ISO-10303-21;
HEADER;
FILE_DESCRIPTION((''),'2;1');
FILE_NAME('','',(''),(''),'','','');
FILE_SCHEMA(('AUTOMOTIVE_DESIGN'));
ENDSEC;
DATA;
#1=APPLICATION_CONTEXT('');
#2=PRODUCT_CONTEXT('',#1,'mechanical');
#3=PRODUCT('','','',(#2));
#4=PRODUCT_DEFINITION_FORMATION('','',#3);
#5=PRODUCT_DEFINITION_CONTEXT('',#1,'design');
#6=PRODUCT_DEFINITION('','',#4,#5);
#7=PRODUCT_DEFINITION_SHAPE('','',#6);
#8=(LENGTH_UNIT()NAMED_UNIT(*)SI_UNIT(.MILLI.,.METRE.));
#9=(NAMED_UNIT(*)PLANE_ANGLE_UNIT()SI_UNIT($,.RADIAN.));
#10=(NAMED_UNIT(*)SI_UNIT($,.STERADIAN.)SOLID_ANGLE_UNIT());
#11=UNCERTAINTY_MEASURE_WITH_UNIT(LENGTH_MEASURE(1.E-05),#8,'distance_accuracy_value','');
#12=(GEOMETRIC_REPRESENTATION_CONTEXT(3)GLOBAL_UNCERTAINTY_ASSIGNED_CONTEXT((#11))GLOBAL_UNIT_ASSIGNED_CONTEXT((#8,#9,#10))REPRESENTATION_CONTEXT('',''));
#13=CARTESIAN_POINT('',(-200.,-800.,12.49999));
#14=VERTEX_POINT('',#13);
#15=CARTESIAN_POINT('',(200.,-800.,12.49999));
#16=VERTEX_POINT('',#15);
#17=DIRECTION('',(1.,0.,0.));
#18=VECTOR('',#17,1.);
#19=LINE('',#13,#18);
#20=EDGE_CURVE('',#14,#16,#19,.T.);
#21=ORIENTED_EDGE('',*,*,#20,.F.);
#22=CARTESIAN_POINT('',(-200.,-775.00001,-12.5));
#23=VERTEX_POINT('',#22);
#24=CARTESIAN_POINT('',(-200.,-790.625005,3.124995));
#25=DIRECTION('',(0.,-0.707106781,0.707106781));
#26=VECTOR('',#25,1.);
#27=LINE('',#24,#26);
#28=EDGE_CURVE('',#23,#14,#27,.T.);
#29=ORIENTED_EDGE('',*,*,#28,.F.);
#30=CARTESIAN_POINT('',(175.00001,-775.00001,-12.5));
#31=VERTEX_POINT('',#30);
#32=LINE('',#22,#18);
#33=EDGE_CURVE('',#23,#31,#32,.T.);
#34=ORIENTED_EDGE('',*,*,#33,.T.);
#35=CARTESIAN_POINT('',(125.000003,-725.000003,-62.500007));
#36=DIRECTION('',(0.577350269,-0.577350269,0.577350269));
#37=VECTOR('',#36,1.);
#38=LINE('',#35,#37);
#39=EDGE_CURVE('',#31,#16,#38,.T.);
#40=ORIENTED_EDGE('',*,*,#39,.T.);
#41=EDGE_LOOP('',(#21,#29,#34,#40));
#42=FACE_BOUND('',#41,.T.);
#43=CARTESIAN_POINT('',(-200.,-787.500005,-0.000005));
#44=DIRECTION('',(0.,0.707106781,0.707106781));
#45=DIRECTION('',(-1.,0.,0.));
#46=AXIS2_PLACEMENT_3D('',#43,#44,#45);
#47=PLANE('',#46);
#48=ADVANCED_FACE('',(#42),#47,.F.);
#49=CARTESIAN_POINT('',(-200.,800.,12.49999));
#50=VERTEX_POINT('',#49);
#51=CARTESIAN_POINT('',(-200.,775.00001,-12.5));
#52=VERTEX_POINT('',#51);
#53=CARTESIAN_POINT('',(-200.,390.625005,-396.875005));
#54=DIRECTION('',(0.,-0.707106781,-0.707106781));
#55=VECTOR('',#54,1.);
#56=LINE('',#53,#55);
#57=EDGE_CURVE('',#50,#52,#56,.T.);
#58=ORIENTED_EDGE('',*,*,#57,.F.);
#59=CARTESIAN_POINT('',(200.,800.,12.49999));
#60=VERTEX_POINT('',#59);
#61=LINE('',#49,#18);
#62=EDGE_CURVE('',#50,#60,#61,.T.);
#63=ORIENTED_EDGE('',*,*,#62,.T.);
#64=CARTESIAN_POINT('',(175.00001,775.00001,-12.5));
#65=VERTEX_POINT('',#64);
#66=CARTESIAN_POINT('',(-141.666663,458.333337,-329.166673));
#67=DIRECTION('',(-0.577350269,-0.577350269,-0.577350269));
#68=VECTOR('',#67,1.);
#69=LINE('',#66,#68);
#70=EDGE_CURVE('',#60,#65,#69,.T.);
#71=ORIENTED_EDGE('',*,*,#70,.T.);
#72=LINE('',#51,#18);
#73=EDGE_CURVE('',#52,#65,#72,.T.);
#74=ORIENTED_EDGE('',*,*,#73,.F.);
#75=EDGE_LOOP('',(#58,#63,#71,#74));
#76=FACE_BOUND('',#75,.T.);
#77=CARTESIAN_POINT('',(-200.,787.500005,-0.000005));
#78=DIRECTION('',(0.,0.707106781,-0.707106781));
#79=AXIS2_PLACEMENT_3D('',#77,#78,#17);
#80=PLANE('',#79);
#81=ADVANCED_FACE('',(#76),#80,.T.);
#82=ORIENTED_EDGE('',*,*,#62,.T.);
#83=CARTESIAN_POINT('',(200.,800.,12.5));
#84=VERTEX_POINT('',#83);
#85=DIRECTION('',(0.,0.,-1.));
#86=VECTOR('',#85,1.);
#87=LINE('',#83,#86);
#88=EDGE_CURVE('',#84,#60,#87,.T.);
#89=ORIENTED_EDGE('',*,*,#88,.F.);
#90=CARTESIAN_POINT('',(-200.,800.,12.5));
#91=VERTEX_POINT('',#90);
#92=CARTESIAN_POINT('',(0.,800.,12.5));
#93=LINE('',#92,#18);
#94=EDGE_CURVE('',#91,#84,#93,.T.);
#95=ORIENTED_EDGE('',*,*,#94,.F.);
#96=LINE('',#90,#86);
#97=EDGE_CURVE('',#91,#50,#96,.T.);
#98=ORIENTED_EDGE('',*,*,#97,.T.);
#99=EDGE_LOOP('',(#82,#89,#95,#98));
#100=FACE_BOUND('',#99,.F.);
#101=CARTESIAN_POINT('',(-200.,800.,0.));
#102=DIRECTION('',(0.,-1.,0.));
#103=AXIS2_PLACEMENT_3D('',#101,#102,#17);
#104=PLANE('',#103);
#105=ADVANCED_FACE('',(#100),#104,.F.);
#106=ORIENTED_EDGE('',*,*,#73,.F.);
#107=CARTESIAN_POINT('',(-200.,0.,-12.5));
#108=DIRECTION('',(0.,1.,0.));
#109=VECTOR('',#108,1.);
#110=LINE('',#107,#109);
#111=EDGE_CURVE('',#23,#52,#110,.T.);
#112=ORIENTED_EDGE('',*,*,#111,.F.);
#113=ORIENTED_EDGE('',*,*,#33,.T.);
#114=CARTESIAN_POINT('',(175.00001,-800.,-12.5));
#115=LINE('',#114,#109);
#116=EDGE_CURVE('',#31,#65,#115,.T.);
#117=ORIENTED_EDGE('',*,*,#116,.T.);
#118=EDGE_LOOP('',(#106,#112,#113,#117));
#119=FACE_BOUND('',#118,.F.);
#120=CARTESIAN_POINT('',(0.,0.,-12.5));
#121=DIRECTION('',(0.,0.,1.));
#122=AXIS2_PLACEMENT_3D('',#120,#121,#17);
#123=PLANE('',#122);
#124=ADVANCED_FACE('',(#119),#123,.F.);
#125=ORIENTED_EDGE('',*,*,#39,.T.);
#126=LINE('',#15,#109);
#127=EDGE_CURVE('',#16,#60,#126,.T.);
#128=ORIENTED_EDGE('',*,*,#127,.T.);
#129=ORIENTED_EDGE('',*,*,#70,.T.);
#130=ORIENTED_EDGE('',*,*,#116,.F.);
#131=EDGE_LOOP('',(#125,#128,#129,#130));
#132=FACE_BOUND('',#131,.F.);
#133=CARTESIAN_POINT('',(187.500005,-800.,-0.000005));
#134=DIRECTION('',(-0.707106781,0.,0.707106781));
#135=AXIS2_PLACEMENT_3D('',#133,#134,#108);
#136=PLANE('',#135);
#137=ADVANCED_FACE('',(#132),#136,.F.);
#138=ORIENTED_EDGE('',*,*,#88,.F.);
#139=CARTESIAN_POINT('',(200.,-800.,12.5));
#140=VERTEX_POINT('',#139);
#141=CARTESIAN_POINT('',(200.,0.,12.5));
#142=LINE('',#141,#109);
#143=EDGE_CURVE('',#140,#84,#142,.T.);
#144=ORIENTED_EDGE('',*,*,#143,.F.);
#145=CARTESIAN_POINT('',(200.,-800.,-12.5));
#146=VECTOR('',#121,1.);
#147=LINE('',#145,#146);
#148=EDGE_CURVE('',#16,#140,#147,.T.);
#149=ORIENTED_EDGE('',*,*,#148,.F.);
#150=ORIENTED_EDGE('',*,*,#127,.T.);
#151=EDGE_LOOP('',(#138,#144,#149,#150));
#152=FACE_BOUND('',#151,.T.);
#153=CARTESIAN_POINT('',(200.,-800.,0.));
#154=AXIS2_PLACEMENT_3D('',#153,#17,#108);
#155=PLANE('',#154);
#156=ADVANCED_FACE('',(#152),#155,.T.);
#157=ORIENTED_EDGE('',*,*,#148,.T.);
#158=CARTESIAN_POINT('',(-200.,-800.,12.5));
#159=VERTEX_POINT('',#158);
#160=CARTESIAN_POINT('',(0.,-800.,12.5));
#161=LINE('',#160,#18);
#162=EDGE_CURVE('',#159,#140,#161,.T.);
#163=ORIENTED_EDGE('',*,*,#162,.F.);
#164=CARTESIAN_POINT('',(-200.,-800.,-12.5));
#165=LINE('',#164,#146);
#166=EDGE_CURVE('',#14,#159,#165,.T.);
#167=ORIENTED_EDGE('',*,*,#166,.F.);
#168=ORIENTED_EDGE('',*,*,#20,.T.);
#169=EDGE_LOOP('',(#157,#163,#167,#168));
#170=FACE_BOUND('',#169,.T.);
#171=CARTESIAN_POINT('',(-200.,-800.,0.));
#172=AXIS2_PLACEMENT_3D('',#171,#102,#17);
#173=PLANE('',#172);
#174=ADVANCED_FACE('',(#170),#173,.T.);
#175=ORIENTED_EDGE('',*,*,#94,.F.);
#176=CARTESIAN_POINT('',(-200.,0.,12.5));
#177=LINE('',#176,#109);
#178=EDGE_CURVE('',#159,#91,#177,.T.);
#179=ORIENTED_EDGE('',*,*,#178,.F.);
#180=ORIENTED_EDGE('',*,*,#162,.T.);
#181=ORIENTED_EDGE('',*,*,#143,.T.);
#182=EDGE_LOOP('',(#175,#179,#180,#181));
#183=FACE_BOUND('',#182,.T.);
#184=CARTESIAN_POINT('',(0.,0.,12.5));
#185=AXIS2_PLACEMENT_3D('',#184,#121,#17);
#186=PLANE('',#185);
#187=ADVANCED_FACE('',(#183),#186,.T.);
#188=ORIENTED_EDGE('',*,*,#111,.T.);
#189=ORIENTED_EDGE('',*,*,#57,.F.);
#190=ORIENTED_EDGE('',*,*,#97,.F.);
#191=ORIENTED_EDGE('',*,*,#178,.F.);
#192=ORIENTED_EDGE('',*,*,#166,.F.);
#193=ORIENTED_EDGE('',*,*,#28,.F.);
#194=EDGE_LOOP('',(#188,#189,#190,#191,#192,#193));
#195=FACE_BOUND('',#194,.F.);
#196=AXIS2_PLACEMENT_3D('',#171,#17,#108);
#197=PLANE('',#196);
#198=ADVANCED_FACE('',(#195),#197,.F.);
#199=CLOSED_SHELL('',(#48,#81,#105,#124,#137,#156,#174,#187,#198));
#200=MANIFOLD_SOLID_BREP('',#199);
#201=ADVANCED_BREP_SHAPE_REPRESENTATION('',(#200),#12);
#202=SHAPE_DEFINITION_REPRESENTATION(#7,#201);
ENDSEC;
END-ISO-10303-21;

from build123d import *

# Parameters (mm, degrees)
F0_W     = 400
F0_H     = 1600
F1_DEPTH = 12.5
F2_SIZE  = 24.99999


# Not quite as in the source:
# - a fillet or chamfer is up to 0.001 mm smaller than in the source, because OpenCascade refuses the exact size


with BuildPart() as f1:
    # F0 (on Top) → F1 (new body, symmetric)
    with BuildSketch(Plane.XY):
        Rectangle(F0_W, F0_H)
    extrude(amount=F1_DEPTH, both=True)

    # F2 (size 25 in the source; OpenCascade refuses exactly that, so slightly less here)
    f2_edges = [f1.edges().sort_by_distance(p)[0] for p in [
        (0, -800, -12.5),
        (0, 800, -12.5),
        (200, 0, -12.5),
    ]]
    chamfer(f2_edges, length=F2_SIZE)


solid = f1.part
